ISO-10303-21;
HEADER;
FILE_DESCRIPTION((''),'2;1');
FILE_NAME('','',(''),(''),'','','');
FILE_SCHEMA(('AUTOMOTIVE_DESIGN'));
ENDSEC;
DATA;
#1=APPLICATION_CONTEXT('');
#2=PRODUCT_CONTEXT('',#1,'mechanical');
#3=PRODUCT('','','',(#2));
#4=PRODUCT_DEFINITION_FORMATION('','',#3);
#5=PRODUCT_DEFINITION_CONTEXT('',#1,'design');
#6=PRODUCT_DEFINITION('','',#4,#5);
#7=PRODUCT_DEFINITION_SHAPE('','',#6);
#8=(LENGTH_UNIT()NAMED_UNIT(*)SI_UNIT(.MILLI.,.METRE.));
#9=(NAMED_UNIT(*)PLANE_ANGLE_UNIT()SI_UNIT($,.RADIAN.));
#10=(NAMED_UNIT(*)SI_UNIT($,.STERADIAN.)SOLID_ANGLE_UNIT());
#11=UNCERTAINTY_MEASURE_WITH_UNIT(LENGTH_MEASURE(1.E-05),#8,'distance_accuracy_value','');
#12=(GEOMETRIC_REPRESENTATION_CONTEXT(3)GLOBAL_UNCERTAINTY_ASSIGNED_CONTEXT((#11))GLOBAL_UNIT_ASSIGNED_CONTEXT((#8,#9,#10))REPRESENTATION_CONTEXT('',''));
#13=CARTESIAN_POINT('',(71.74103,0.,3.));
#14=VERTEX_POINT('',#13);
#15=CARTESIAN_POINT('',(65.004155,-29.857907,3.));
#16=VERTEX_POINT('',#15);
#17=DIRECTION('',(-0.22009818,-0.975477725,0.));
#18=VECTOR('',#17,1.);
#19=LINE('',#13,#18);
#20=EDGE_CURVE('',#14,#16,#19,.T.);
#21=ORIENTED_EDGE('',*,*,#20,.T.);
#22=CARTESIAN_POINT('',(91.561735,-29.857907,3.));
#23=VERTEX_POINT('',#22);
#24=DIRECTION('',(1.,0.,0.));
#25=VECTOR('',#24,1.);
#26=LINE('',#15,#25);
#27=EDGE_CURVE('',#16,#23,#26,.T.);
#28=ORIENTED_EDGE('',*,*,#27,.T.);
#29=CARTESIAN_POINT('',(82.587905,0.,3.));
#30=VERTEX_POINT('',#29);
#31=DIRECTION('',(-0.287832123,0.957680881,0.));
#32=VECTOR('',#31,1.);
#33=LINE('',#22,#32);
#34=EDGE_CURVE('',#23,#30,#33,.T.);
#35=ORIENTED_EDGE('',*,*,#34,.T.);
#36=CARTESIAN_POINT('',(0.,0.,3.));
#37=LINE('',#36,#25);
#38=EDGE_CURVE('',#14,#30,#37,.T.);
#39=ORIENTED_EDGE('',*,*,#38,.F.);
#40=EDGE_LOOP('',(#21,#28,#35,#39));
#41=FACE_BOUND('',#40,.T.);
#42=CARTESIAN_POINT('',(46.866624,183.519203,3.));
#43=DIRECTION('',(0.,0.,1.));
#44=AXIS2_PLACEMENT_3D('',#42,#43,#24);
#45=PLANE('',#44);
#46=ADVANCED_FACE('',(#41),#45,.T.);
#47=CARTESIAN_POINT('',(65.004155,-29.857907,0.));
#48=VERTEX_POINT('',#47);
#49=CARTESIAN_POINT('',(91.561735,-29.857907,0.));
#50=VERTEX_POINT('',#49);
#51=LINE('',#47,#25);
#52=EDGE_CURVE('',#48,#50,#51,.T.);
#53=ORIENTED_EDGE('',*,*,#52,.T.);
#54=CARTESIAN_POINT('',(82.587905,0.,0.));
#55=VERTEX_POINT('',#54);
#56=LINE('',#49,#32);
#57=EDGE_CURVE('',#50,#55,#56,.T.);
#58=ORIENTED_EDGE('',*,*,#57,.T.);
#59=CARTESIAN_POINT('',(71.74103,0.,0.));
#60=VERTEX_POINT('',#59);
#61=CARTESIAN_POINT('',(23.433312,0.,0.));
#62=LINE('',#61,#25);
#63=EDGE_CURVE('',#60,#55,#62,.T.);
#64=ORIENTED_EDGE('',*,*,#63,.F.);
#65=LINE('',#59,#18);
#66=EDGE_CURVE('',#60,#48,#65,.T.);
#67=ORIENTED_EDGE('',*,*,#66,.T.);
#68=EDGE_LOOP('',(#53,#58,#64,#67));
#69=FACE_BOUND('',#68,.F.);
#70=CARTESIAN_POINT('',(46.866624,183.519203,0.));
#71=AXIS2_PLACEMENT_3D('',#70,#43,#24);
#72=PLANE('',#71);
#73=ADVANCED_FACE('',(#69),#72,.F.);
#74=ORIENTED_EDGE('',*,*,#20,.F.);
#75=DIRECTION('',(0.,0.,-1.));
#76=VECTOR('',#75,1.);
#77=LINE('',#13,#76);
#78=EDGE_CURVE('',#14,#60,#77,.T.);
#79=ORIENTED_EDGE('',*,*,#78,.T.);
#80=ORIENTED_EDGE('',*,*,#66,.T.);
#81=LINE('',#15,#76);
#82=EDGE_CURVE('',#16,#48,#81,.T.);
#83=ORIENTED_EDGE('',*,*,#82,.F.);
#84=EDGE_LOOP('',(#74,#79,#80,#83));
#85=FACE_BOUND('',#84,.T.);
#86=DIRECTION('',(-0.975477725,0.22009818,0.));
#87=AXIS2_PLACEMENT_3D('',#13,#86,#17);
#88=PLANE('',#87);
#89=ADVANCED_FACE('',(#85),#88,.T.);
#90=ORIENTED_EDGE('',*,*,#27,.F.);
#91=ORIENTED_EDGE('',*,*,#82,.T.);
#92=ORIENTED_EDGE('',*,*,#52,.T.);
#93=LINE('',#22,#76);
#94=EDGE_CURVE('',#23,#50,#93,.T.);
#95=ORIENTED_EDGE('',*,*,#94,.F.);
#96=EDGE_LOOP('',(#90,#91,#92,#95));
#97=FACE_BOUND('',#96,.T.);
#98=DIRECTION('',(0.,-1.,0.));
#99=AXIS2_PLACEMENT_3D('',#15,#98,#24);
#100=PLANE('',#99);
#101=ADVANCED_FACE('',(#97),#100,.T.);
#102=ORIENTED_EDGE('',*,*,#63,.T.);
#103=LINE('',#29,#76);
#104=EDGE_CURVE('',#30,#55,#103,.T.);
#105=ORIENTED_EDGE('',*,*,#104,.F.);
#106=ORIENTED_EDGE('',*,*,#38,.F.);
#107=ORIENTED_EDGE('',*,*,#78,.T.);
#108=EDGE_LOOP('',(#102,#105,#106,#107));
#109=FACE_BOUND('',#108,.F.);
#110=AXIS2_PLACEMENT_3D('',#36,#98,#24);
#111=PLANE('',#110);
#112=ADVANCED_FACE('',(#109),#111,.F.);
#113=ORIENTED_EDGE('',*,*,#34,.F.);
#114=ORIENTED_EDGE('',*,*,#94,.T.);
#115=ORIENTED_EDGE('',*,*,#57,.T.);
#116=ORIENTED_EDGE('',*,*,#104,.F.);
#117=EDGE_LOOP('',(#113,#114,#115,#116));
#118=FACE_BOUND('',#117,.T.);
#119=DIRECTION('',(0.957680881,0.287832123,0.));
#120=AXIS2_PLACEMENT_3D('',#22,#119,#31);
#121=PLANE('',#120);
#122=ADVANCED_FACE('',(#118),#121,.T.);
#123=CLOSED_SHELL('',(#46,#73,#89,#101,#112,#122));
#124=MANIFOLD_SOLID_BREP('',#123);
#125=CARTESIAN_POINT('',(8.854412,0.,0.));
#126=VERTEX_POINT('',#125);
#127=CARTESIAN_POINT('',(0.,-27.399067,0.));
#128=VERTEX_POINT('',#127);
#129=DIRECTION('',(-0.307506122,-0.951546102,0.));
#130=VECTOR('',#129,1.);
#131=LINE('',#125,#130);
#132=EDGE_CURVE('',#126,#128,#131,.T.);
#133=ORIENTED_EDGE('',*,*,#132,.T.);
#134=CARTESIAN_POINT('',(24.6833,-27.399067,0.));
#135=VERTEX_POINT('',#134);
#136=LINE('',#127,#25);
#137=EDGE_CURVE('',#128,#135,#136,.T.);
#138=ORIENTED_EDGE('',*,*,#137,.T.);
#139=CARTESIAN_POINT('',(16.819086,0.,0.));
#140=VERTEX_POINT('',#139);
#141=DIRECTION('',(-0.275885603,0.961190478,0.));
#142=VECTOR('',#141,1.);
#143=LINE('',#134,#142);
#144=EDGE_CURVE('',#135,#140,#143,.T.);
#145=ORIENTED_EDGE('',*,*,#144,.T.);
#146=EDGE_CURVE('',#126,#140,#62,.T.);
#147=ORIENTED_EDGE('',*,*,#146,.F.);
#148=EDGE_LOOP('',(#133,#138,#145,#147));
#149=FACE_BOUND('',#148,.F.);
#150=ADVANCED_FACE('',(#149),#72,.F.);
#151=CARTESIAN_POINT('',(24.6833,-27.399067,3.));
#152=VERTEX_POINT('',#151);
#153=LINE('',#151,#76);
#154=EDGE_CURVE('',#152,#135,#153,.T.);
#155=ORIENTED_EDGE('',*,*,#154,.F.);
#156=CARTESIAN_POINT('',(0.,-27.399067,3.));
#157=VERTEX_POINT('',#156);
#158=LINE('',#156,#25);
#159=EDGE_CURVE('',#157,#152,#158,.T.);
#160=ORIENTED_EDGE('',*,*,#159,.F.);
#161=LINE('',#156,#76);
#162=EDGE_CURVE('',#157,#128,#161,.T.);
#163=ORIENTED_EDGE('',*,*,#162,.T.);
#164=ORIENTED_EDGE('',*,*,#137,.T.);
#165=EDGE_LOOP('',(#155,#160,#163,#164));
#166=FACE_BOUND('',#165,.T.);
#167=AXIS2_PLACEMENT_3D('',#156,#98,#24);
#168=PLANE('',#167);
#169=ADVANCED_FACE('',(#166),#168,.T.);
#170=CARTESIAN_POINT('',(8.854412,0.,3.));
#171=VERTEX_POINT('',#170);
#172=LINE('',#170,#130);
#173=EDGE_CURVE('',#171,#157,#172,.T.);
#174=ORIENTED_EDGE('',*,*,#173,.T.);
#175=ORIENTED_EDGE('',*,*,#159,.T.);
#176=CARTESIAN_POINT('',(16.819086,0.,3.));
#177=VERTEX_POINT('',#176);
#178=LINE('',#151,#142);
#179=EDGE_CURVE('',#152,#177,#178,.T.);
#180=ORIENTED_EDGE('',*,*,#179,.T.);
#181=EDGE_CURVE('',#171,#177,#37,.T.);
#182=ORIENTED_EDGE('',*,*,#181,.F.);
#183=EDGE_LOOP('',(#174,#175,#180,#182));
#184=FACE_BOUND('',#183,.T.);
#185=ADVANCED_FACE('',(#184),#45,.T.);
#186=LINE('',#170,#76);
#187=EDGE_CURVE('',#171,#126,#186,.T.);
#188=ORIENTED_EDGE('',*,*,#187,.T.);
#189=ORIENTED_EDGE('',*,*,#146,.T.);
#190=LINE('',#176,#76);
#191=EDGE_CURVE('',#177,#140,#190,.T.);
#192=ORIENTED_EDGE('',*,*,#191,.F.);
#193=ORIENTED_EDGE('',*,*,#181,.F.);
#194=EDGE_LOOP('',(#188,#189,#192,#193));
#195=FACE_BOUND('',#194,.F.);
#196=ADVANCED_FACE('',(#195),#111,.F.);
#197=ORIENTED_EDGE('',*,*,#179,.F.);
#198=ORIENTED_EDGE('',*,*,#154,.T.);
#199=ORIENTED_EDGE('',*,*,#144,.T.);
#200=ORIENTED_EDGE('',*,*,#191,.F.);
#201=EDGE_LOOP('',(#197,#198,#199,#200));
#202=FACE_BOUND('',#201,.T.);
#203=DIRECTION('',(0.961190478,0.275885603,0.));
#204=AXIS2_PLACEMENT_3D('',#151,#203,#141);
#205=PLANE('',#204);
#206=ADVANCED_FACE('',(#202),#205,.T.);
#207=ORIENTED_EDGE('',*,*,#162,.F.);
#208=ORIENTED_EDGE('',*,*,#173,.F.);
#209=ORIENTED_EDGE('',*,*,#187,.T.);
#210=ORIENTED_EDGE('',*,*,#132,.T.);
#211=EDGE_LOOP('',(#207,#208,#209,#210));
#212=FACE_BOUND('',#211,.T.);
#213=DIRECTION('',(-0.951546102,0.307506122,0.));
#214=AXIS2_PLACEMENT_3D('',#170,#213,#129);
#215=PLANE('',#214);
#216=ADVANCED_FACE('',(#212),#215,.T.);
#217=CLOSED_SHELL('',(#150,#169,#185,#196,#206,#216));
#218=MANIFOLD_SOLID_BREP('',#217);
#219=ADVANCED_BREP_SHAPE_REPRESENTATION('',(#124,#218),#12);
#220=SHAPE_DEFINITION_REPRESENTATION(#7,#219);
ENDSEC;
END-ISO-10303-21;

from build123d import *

# Parameters (mm, degrees)
F1_W      = 100
F1_H      = 150
F2_DEPTH  = 3
F4_DEPTH  = 3
F6_DEPTH  = 3
F7_DEPTH  = 184.7764700651
F3_W      = 100
F3_H      = 150
F10_DEPTH = 25
F11_DEPTH = 170.0117439032


# Not quite as in the source:
# - a feature names something its author has since deleted; it is built from what else it names


with BuildPart() as f2:
    # F1 (on face) → F2 (new body)
    with BuildSketch(Plane.XY):
        with Locations((50, 75)):
            Rectangle(F1_W, F1_H)
    extrude(amount=F2_DEPTH)

    # F3 (on face) → F4 (join)
    with BuildSketch(Plane.XY.offset(3)):
        Polygon((38.5150648654, 247.4973201752), (0, 150), (100, 150), align=None)
    extrude(amount=-F4_DEPTH)

    # F5 (on face) → F6 (join)
    with BuildSketch(Plane.XY.offset(3)):
        Polygon((16.8190859258, 0), (8.8544115424, 0), (0, -27.3990668356), (24.6833004057, -27.3990668356), align=None)
        Polygon((82.5879052281, 0), (71.7410296202, 0), (65.0041550398, -29.8579074442), (91.5617346764, -29.8579074442), align=None)
    extrude(amount=-F6_DEPTH)

    # F5 (on face) → F7 (cut)
    with BuildSketch(Plane.XY.offset(3)):
        Polygon((0, 0), (8.8544115424, 0), (16.8190859258, 0), (71.7410296202, 0), (82.5879052281, 0), (100, 0), (100, 150), (38.5150648654, 247.4973201752), (0, 150), align=None)
    extrude(amount=-F7_DEPTH, mode=Mode.SUBTRACT)

    # F3 (on face) → F10 (cut)
    with BuildSketch(Plane.XY.offset(3)):
        with Locations((50, 75)):
            Rectangle(F3_W, F3_H)
    extrude(amount=-F10_DEPTH, mode=Mode.SUBTRACT)

    # F9 (on face) → F11 (cut)
    with BuildSketch(Plane.XY.offset(3)):
        with BuildLine():
            ThreePointArc((71.7517411709, 31.0983583331), (74.2517411709, 28.5983583331), (76.7517411709, 31.0983583331))
            Line((76.7517411709, 31.0983583331), (76.7517411709, 76.4879286289))
            ThreePointArc((76.7517411709, 76.4879286289), (74.2517411709, 78.9879286289), (71.7517411709, 76.4879286289))
            Line((71.7517411709, 76.4879286289), (71.7517411709, 31.0983583331))
        make_face()
    extrude(amount=-F11_DEPTH, mode=Mode.SUBTRACT)


solid = f2.part
